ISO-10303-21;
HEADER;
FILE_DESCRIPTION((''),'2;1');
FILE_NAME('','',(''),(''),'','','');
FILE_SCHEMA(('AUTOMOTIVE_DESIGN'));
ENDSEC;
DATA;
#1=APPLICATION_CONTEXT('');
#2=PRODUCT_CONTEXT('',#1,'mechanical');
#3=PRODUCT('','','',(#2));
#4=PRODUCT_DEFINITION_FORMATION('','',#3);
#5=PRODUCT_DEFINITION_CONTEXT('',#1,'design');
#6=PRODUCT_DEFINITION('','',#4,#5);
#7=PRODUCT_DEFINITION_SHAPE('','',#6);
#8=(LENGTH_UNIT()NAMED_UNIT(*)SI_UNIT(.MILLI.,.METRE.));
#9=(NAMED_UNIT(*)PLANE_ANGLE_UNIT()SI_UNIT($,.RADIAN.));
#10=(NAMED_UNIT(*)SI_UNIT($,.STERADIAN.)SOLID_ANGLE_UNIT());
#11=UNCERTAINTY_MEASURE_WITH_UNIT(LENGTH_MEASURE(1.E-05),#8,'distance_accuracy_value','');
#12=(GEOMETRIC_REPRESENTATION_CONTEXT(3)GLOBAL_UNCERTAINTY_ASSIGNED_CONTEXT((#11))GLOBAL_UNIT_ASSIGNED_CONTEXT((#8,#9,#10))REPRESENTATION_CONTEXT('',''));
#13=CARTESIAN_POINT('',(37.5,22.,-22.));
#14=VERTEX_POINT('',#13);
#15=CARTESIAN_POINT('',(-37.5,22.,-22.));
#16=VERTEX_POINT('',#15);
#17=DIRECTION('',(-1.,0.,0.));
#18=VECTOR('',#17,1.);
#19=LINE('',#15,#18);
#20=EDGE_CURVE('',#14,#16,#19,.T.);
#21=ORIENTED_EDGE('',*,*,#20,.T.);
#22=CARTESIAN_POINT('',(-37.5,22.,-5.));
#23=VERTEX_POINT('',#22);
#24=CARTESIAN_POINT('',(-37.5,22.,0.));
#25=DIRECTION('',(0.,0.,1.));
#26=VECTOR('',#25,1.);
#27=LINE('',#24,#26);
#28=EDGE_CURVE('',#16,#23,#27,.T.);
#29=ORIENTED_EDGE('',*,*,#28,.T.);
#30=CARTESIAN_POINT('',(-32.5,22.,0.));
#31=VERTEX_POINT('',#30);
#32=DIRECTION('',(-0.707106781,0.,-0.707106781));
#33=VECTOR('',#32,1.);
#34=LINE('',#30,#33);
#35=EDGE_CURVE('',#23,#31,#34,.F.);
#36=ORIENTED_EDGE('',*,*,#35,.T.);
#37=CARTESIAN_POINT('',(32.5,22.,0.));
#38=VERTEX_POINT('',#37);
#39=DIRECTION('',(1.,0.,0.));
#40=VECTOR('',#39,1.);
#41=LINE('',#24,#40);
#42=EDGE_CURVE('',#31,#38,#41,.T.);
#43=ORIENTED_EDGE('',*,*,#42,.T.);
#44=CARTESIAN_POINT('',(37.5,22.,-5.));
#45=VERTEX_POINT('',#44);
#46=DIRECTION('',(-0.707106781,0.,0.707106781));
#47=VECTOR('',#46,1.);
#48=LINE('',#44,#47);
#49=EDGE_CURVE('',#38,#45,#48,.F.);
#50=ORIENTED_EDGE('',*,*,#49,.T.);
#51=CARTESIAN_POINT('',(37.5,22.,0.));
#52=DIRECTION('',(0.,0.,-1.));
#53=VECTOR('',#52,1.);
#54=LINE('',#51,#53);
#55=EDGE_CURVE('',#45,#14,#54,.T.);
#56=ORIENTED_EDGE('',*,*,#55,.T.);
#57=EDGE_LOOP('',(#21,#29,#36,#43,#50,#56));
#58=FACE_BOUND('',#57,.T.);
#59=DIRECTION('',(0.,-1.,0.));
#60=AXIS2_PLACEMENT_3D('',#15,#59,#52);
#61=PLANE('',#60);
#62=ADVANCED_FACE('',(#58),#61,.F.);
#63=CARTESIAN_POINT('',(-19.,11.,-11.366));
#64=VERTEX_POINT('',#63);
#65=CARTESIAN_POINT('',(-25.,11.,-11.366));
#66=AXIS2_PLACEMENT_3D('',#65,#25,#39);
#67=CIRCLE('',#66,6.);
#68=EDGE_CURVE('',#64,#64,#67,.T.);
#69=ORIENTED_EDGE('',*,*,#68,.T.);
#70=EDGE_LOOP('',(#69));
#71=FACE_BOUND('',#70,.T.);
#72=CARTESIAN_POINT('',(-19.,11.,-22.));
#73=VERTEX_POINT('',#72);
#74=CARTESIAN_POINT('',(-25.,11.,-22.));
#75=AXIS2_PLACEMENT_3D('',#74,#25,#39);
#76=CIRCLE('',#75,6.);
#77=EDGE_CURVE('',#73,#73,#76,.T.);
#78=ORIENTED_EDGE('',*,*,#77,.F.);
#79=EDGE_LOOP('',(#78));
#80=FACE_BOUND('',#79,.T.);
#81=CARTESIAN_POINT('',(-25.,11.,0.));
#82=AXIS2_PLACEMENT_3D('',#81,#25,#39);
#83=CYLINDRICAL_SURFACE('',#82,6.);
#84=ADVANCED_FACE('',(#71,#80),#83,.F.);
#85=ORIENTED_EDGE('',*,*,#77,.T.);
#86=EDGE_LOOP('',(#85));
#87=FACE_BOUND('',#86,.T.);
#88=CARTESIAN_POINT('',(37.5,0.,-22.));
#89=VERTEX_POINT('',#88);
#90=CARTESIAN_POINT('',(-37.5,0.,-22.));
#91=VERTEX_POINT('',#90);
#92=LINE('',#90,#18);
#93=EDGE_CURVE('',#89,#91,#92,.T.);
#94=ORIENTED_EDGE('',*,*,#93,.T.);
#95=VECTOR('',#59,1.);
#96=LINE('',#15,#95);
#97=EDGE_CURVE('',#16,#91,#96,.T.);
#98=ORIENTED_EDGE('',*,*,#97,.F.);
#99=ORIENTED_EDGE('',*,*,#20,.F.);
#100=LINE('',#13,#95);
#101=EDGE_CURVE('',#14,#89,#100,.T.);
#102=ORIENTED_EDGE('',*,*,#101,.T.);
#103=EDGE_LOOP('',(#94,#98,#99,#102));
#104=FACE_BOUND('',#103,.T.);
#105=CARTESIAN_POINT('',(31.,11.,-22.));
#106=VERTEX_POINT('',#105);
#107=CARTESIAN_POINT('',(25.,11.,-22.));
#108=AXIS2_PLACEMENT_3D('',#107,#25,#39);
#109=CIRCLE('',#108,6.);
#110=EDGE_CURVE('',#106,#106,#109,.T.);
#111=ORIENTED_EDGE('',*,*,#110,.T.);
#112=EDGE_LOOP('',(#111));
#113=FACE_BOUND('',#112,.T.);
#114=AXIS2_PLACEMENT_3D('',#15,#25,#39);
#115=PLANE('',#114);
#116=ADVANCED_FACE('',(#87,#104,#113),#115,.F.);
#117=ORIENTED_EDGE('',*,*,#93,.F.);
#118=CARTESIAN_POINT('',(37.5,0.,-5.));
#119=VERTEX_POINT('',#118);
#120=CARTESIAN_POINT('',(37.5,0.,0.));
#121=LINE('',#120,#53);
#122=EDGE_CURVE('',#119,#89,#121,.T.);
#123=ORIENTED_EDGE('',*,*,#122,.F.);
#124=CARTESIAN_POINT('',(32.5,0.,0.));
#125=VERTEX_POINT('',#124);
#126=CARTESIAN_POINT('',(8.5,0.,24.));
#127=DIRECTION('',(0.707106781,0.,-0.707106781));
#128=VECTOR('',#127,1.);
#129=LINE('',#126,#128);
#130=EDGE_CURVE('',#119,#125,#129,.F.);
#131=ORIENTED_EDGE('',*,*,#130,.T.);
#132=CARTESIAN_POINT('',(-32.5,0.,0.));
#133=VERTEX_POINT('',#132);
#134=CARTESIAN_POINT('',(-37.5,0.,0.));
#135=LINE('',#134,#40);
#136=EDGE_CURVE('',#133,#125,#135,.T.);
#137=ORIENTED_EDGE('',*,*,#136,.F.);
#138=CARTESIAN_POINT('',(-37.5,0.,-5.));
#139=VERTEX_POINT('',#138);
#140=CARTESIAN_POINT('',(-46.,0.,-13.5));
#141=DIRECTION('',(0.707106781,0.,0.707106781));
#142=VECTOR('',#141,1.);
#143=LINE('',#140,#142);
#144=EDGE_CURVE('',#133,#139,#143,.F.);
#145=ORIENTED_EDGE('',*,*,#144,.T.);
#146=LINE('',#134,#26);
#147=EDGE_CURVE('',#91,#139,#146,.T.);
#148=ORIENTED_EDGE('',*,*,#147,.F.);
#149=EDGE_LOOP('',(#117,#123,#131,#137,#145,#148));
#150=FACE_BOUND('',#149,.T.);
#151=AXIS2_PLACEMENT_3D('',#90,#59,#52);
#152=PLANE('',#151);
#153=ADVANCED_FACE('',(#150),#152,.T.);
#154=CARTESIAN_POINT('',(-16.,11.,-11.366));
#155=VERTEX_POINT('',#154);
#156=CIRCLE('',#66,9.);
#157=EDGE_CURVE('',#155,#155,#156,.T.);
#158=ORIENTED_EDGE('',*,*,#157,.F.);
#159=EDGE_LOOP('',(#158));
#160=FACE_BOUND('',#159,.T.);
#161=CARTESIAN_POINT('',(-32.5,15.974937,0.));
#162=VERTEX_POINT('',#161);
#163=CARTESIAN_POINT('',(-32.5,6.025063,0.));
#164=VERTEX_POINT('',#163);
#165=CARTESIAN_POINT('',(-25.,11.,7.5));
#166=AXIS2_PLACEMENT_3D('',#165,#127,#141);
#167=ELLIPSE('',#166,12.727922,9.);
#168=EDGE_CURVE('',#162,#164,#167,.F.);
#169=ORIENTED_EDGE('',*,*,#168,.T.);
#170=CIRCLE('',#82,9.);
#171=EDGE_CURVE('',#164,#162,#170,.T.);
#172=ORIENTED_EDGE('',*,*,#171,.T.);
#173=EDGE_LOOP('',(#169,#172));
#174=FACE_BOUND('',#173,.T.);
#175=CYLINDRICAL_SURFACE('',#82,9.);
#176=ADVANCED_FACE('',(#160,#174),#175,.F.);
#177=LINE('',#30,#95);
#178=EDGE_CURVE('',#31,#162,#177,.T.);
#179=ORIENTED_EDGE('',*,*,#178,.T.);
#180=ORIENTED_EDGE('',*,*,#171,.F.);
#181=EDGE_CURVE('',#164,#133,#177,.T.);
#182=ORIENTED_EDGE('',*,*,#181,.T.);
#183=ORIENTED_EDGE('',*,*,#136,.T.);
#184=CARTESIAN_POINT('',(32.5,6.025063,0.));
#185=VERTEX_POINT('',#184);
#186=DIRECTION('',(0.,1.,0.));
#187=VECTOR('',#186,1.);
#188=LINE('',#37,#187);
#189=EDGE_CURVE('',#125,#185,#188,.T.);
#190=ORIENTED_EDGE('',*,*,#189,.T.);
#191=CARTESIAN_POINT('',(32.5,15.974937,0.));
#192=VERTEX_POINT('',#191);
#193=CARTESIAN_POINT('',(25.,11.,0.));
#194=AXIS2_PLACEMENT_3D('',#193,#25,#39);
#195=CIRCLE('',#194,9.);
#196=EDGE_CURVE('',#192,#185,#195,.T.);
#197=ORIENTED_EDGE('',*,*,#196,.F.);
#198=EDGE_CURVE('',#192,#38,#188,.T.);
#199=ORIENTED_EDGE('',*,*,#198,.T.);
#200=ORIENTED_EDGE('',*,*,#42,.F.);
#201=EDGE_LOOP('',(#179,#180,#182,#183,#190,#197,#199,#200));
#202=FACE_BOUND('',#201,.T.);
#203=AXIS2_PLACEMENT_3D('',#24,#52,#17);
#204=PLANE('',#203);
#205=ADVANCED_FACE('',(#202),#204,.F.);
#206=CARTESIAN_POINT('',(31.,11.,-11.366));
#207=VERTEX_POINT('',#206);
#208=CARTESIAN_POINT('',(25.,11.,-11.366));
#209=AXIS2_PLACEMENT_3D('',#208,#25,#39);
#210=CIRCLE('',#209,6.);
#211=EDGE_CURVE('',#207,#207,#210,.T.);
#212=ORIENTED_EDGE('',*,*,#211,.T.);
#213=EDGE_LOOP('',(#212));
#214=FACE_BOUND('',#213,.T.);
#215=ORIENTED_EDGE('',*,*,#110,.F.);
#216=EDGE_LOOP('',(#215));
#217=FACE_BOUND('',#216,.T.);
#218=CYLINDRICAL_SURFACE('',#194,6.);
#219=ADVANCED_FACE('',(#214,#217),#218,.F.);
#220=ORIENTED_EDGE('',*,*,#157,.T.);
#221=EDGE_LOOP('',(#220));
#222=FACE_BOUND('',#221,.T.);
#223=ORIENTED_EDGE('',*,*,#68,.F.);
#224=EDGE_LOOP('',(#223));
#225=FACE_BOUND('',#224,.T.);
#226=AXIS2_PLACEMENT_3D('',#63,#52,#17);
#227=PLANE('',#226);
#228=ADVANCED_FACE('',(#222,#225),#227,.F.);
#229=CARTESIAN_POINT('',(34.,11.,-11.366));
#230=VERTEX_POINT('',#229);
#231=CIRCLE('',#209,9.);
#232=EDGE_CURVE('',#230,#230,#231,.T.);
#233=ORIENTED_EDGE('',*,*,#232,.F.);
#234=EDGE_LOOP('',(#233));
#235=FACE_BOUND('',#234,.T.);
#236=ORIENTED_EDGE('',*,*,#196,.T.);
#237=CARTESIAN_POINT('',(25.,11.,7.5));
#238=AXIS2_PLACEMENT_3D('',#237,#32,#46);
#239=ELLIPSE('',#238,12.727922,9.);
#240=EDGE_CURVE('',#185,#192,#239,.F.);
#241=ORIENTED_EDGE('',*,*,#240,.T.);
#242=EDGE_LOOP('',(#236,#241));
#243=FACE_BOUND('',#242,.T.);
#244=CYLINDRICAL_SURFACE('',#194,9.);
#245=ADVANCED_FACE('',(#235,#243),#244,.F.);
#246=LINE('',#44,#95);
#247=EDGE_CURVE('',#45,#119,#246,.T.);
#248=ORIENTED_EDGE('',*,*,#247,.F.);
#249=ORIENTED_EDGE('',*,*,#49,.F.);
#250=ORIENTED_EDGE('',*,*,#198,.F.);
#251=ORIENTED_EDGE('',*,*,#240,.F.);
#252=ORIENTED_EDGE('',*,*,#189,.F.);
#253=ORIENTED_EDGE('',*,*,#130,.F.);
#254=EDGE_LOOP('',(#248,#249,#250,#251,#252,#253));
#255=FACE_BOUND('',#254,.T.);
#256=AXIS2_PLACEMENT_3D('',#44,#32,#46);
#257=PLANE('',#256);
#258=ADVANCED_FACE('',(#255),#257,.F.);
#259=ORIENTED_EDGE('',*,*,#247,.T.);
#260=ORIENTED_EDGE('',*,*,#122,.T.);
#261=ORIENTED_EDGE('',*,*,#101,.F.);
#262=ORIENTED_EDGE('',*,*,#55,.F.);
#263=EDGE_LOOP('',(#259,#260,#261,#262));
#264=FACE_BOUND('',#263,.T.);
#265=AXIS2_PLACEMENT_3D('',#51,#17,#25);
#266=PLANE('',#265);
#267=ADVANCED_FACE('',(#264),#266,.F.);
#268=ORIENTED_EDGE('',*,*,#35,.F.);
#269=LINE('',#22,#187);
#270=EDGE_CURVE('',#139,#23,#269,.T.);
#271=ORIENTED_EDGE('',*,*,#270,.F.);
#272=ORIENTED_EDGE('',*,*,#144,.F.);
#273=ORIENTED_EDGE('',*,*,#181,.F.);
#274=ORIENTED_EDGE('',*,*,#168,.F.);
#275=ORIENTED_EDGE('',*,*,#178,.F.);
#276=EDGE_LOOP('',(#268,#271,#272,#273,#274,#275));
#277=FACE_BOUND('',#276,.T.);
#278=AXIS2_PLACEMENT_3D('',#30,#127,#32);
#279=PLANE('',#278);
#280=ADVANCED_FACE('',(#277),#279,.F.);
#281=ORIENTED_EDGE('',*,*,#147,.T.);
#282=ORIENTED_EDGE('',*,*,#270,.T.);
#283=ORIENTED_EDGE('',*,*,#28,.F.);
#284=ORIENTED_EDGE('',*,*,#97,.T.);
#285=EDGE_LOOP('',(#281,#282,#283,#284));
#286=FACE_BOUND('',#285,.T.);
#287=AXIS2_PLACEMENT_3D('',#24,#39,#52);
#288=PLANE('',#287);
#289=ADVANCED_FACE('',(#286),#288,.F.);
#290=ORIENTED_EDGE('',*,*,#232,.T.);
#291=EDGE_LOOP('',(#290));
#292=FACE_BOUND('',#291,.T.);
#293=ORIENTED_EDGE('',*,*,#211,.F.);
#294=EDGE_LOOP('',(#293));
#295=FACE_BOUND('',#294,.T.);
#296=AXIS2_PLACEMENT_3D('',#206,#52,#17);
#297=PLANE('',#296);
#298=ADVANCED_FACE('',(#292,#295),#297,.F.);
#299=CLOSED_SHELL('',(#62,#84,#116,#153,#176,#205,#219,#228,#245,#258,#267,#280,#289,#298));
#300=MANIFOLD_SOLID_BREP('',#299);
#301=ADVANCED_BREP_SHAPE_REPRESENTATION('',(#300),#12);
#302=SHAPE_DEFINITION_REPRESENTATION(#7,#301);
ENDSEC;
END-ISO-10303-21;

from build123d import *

# Parameters (mm, degrees)
SKETCH1_W                                        = 75
SKETCH1_H                                        = 22
BOSS_EXTRUDE1_DEPTH                              = 22
CBORE_FOR_M10_SOCKET_HEAD_CAP_SCREW1_D           = 12
CBORE_FOR_M10_SOCKET_HEAD_CAP_SCREW1_CBORE_D     = 18
CBORE_FOR_M10_SOCKET_HEAD_CAP_SCREW1_CBORE_DEPTH = 11.366
CHAMFER1_SIZE                                    = 5


with BuildPart() as part:
    # Sketch1 → Boss-Extrude1 (new body)
    with BuildSketch(Plane(origin=(0, 0, 0), x_dir=(1, 0, 0), z_dir=(0, 1, 0))):
        with Locations((0, 11)):
            Rectangle(SKETCH1_W, SKETCH1_H)
    extrude(amount=BOSS_EXTRUDE1_DEPTH)

    # CBORE for M10 Socket Head Cap Screw1 (through all)
    with Locations(Plane.XY):
        with Locations((25, 11), (-25, 11)):
            CounterBoreHole(CBORE_FOR_M10_SOCKET_HEAD_CAP_SCREW1_D / 2, CBORE_FOR_M10_SOCKET_HEAD_CAP_SCREW1_CBORE_D / 2, CBORE_FOR_M10_SOCKET_HEAD_CAP_SCREW1_CBORE_DEPTH)

    # Chamfer1
    # the kernel refuses this chamfer: 5 mm, written as the material it takes off along each edge
    with BuildSketch(Plane(origin=(37.5, -12.85841494, 0), x_dir=(-0.9996219169112968, 0, 0.027495876610586372), z_dir=(0, 1, 0))) as chamfer1_piece_1:
        Polygon((CHAMFER1_SIZE * 0.999621916911, -CHAMFER1_SIZE * 0.0274958766106), (-CHAMFER1_SIZE * 0.0274958766106, -CHAMFER1_SIZE * 0.999621916911), (0, 0), align=None)
    extrude(amount=47.71682988, mode=Mode.SUBTRACT)
    with BuildSketch(Plane(origin=(-37.5, -12.85841494, 0), x_dir=(0.9996219169112968, 0, 0.027495876610586372), z_dir=(0, 1, 0))) as chamfer1_piece_2:
        Polygon((CHAMFER1_SIZE * 0.999621916911, CHAMFER1_SIZE * 0.0274958766106), (-CHAMFER1_SIZE * 0.0274958766106, CHAMFER1_SIZE * 0.999621916911), (0, 0), align=None)
    extrude(amount=47.71682988, mode=Mode.SUBTRACT)


solid = part.part
